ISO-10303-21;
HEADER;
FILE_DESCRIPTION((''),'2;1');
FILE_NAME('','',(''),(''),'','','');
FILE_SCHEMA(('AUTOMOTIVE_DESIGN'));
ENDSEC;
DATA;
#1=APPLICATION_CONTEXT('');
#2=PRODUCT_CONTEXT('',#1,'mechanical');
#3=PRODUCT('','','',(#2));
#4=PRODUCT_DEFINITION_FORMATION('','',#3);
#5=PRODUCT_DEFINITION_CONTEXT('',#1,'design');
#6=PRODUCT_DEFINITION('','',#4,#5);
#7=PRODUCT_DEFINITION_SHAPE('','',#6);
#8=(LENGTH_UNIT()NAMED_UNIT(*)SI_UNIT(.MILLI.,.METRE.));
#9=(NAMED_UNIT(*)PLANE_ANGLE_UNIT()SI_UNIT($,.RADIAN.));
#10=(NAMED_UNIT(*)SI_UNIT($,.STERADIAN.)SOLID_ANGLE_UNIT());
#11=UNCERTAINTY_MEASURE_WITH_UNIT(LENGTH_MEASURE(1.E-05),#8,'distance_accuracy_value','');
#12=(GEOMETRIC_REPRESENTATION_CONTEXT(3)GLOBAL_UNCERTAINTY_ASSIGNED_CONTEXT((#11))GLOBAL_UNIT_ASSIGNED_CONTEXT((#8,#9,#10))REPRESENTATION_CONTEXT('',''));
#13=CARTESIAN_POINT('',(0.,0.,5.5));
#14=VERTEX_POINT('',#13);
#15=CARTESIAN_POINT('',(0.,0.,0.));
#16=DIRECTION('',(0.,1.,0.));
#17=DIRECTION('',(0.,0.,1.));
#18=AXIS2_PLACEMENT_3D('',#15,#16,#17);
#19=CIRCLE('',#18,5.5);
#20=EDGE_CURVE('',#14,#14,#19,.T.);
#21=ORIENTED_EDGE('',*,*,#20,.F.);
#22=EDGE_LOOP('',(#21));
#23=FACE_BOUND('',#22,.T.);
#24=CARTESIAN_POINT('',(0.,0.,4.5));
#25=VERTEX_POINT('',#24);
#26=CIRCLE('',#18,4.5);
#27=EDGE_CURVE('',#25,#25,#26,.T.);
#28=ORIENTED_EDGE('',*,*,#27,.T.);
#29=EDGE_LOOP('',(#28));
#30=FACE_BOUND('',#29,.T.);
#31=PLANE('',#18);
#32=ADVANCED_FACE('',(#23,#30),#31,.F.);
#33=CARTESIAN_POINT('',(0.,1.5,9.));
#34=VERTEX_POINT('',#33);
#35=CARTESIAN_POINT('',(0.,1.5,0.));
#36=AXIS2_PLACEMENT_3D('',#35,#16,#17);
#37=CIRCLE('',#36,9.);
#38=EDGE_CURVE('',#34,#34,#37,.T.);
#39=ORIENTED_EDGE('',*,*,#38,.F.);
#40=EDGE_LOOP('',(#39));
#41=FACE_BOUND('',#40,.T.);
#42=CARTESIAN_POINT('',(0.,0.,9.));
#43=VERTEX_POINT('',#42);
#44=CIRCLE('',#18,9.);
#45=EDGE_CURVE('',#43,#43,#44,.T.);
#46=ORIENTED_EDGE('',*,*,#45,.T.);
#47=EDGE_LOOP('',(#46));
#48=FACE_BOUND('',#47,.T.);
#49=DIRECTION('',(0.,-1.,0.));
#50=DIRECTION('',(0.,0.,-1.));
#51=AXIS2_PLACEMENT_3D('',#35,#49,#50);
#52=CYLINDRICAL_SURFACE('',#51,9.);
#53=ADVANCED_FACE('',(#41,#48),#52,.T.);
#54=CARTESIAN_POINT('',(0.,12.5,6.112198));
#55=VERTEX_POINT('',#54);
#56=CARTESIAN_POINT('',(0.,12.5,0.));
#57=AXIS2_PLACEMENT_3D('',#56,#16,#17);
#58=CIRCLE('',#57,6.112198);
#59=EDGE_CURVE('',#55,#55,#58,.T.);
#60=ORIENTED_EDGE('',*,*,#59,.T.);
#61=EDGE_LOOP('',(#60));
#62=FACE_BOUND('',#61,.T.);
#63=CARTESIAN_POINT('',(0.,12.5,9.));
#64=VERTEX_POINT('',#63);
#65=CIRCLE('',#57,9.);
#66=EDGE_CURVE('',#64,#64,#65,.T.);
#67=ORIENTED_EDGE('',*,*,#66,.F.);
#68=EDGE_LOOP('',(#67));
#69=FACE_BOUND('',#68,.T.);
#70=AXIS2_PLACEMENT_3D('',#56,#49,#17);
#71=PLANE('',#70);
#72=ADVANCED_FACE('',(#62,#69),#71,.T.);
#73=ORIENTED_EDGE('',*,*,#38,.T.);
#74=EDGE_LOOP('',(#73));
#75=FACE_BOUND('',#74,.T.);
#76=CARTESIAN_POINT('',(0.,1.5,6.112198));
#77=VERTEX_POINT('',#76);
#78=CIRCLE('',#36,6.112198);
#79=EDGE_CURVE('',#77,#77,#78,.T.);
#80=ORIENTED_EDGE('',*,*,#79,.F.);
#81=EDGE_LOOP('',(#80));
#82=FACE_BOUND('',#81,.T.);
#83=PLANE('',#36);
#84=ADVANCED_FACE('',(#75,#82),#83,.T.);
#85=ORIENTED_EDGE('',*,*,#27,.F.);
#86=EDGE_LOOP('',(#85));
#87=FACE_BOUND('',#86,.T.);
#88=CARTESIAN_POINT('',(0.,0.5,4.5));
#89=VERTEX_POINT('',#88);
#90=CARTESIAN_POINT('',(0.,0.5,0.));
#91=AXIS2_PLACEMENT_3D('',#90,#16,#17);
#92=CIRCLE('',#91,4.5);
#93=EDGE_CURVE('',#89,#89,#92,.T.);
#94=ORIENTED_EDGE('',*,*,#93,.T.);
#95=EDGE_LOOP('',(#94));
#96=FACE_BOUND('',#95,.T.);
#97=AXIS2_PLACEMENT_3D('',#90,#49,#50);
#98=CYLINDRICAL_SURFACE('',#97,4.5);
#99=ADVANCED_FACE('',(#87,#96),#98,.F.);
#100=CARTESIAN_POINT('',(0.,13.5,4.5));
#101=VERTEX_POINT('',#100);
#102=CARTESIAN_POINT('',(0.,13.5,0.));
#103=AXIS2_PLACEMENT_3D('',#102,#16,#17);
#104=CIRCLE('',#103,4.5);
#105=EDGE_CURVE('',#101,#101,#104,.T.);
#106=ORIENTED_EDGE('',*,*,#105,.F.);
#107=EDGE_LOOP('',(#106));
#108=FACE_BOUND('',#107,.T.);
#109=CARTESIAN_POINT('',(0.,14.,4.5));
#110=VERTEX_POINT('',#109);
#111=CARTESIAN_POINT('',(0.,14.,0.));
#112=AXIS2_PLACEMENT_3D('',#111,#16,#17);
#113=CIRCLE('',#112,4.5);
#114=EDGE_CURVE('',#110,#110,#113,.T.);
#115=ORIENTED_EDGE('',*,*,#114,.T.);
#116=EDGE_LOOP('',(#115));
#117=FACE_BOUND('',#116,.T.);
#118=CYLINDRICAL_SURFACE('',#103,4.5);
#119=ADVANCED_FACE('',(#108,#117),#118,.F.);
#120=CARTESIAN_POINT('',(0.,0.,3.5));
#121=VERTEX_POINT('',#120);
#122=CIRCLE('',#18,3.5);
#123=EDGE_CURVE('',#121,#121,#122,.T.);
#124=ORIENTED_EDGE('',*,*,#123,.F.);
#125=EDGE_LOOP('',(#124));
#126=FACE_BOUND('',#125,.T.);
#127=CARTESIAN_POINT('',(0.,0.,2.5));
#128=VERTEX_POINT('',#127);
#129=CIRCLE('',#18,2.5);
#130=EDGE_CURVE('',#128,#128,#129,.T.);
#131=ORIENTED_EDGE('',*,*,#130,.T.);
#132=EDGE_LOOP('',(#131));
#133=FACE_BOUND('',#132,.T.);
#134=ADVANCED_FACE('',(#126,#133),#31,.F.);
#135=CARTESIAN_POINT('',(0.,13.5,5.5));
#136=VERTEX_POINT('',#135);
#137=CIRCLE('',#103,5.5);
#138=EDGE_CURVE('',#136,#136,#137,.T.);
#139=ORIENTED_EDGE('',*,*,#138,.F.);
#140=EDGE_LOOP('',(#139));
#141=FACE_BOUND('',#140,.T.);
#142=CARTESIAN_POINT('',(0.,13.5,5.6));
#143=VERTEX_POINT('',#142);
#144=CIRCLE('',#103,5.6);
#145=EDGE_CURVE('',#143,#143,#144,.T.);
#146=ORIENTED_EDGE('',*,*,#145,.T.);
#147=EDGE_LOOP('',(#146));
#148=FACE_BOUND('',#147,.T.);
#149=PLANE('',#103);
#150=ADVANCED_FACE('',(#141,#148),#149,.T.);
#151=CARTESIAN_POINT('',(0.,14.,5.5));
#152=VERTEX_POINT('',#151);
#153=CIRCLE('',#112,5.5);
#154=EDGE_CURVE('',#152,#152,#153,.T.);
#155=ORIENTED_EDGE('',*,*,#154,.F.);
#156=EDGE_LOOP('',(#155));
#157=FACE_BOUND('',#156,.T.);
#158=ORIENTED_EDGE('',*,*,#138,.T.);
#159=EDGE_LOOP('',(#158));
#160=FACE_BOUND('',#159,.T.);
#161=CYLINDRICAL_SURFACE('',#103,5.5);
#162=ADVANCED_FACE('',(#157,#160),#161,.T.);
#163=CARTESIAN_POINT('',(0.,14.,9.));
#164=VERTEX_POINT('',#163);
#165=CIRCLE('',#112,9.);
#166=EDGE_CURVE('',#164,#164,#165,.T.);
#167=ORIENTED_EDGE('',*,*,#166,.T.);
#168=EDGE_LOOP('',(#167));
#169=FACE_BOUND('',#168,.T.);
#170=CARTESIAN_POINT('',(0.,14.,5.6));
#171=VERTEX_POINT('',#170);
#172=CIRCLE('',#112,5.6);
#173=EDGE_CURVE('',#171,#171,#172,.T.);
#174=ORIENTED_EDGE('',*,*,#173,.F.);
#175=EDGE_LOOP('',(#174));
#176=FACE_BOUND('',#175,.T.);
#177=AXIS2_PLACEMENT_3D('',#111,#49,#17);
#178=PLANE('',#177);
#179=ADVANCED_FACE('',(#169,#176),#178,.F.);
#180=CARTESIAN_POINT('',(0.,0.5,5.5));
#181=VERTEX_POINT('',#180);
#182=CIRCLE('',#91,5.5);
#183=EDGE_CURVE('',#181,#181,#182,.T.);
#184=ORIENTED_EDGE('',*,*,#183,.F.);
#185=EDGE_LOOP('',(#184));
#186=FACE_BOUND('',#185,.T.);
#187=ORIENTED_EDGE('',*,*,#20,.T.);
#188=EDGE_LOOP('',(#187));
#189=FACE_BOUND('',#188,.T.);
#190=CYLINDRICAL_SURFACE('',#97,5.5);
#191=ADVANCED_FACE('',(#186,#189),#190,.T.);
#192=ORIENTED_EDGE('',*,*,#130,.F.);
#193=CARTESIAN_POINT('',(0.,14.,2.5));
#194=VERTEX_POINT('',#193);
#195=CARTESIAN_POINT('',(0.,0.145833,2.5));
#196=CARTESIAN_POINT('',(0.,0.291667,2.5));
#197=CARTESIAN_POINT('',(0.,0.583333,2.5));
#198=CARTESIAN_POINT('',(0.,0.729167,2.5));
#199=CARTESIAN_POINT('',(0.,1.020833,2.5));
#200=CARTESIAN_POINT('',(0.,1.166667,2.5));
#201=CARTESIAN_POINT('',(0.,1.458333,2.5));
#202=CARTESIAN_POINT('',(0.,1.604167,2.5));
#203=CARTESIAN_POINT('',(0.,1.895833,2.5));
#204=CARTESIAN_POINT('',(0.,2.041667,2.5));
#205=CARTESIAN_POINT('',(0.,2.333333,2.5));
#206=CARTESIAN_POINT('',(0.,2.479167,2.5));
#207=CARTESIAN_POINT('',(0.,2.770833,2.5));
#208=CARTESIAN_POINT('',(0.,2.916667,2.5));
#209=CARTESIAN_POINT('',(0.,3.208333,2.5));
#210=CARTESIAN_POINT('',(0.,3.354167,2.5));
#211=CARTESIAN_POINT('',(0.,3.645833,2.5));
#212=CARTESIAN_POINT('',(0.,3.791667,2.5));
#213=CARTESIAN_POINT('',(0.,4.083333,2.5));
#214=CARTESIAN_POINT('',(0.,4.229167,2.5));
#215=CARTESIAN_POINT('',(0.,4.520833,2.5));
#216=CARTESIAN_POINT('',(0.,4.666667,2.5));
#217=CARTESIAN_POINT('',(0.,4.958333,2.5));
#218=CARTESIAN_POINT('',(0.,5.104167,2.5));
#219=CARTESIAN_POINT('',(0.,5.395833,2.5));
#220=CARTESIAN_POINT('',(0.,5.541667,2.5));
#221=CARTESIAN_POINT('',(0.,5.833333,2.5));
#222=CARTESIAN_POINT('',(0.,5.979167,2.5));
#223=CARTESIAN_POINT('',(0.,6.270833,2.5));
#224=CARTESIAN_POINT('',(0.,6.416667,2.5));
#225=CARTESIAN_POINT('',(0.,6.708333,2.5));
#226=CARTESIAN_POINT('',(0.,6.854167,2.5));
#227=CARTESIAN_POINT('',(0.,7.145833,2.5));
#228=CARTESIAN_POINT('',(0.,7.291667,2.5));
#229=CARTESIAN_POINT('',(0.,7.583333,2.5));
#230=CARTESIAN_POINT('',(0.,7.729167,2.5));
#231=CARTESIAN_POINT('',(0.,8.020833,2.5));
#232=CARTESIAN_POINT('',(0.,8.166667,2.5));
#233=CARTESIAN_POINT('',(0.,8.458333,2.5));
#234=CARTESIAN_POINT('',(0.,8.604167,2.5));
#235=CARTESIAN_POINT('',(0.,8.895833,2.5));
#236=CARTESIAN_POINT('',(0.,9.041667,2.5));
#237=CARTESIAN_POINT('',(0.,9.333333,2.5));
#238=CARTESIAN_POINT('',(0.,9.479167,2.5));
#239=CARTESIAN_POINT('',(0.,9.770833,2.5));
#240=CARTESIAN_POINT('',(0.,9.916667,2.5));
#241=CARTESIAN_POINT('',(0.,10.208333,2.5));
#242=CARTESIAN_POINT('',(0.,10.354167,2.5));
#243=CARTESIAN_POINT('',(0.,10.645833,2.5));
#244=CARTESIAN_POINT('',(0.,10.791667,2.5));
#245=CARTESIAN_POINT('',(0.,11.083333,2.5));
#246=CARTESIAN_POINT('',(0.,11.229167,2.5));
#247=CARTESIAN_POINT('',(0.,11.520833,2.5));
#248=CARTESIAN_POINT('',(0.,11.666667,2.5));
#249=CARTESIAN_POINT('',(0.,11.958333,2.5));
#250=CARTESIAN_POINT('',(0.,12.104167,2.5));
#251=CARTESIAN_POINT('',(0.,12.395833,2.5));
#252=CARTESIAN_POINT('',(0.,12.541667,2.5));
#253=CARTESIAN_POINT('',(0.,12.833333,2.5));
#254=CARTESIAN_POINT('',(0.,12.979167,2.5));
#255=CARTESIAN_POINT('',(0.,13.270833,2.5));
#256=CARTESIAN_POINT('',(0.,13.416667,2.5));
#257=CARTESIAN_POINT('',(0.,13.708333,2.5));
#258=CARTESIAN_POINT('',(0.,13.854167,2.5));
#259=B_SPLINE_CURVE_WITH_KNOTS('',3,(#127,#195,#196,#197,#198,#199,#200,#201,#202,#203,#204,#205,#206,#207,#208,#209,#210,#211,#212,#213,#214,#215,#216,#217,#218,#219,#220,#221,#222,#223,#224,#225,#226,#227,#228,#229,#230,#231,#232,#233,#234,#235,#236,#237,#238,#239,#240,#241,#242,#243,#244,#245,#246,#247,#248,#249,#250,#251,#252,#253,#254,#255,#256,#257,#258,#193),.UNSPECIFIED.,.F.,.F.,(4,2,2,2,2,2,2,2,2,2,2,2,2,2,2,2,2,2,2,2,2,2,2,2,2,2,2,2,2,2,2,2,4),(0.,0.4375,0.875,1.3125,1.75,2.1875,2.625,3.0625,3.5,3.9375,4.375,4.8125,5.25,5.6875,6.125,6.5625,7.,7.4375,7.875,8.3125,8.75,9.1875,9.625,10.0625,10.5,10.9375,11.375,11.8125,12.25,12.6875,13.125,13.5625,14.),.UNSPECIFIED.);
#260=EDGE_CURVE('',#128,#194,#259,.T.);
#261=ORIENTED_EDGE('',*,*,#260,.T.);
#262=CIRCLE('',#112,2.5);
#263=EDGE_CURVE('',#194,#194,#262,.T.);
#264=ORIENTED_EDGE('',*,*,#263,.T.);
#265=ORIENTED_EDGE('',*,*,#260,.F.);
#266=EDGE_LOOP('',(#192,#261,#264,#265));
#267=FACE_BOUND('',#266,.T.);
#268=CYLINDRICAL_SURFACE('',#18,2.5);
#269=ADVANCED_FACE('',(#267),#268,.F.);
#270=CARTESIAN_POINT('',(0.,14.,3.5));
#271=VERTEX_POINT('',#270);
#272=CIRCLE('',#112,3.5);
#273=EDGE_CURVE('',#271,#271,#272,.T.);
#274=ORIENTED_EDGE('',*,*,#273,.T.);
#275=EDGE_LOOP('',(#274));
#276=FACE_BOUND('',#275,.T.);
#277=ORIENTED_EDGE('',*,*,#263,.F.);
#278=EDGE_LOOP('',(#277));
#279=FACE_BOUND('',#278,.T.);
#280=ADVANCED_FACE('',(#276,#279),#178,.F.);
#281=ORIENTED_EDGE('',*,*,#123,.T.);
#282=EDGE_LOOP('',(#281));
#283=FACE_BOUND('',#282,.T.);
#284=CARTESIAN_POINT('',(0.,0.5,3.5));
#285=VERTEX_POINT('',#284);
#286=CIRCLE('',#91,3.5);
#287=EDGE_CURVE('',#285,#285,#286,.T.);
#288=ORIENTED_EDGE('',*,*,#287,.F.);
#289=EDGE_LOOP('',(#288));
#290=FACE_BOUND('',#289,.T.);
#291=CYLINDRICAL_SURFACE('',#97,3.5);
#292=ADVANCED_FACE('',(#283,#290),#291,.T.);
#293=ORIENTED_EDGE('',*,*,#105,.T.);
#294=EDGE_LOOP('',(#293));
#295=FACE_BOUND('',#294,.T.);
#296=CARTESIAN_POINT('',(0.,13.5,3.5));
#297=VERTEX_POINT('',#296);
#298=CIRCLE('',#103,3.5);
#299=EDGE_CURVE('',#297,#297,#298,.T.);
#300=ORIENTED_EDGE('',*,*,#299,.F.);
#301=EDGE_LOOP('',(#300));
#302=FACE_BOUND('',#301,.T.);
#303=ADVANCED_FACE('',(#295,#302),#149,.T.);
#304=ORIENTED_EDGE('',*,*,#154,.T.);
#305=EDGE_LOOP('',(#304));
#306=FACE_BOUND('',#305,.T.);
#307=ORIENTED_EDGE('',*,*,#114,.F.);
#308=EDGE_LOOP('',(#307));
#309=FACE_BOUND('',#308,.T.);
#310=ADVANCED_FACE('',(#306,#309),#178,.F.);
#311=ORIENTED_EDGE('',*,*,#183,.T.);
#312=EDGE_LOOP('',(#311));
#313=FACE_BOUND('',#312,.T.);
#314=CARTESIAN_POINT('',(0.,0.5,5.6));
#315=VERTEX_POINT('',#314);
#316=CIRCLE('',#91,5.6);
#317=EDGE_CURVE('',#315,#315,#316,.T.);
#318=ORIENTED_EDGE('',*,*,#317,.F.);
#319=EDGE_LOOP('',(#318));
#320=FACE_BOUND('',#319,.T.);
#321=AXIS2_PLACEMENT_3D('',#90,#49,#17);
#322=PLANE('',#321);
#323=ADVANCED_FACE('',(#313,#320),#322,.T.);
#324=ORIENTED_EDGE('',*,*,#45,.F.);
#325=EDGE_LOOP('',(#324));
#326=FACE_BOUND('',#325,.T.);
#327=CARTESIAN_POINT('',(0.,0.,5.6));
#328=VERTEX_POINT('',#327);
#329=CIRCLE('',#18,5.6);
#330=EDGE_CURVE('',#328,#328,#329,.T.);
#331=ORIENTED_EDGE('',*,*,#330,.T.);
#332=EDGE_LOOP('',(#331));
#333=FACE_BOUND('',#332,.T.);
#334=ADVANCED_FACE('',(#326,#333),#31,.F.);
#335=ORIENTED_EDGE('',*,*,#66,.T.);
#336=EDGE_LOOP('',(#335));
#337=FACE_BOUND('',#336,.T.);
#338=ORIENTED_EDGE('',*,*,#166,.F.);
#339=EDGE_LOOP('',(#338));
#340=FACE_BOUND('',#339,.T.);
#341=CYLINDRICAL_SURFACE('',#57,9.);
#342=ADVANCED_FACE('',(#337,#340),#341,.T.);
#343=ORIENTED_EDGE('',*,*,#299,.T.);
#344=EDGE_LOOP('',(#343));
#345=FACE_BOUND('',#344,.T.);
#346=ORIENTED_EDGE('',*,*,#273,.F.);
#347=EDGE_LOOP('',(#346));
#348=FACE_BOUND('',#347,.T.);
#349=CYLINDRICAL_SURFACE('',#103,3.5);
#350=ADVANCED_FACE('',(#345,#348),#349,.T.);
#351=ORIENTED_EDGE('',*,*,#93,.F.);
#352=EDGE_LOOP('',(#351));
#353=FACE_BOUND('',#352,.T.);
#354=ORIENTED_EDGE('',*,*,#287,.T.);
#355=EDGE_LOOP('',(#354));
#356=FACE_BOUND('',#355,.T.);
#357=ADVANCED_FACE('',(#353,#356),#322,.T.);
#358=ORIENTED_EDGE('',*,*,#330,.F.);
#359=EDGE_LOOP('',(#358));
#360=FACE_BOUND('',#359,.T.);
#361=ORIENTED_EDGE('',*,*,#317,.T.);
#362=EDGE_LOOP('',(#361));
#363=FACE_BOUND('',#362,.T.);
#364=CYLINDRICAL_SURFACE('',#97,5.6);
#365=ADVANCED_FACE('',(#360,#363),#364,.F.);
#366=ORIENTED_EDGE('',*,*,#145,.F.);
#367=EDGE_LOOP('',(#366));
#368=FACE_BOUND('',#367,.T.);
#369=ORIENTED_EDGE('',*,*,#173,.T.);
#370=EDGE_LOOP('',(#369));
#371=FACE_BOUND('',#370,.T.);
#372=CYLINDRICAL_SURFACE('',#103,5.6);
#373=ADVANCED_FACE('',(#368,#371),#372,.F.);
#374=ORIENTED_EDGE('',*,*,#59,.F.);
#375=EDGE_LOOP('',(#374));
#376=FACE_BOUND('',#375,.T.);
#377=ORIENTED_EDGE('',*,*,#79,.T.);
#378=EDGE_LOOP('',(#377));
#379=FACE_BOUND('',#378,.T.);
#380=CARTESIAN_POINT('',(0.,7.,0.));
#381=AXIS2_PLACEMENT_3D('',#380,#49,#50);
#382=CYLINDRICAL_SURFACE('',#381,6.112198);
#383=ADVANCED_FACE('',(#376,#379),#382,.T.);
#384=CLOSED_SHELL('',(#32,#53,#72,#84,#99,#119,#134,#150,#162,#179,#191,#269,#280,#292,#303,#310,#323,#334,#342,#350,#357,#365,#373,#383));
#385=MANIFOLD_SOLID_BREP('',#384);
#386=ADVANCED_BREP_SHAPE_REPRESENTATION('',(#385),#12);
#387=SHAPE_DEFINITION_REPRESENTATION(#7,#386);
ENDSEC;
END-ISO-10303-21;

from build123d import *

# Parameters (mm, degrees)
BOSS_EXTRUDE1_OUTLINE_R = 9
BOSS_EXTRUDE1_DEPTH     = 1.5
SKETCH2_R               = 6.1121977
BOSS_EXTRUDE2_DEPTH     = 5.5
SKETCH3_R               = 2.5
CUT_EXTRUDE1_DEPTH      = 19.920887928
SKETCH4_R               = 5.6
SKETCH4_R_2             = 5.5
SKETCH4_R_3             = 4.5
SKETCH4_R_4             = 3.5
CUT_EXTRUDE2_DEPTH      = 0.5


# Read off the part's stored shape, not the designer's step: Boss-Extrude1
with BuildPart() as part:
    # Boss-Extrude1 outline → Boss-Extrude1 (new body)
    with BuildSketch(Plane(origin=(0, 0, 0), x_dir=(1, 0, 0), z_dir=(0, 1, 0))):
        Circle(BOSS_EXTRUDE1_OUTLINE_R)
    boss_extrude1 = extrude(amount=BOSS_EXTRUDE1_DEPTH)

    # Sketch2 → Boss-Extrude2 (add)
    with BuildSketch(Plane(origin=(0, 1.5, 0), x_dir=(1, 0, 0), z_dir=(0, 1, 0))):
        with Locations(Location((0, 0, 0), (0, 0, 270))):
            Circle(SKETCH2_R)
    boss_extrude2 = extrude(amount=BOSS_EXTRUDE2_DEPTH)

    # Mirror1: Boss-Extrude2 across plane
    add(boss_extrude2.mirror(Plane.ZX.offset(7)))

    # Mirror2: Boss-Extrude1 across plane
    add(boss_extrude1.mirror(Plane.ZX.offset(7)))

    # Sketch3 → Cut-Extrude1 (cut, through all)
    with BuildSketch(Plane(origin=(0, 14, 0), x_dir=(1, 0, 0), z_dir=(0, 1, 0))):
        with Locations(Location((0, 0, 0), (0, 0, 270))):
            Circle(SKETCH3_R)
    extrude(amount=-CUT_EXTRUDE1_DEPTH, mode=Mode.SUBTRACT)

    # Sketch4 → Cut-Extrude2 (cut)
    # profile 1 of 2: a face of its own
    with BuildSketch(Plane(origin=(0, 14, 0), x_dir=(1, 0, 0), z_dir=(0, 1, 0))):
        with Locations(Location((0, 0, 0), (0, 0, 270))):
            Circle(SKETCH4_R)
        with Locations(Location((0, 0, 0), (0, 0, 270))):
            Circle(SKETCH4_R_2, mode=Mode.SUBTRACT)
    # profile 2 of 2: a face of its own
    with BuildSketch(Plane(origin=(0, 14, 0), x_dir=(1, 0, 0), z_dir=(0, 1, 0))):
        with Locations(Location((0, 0, 0), (0, 0, 270))):
            Circle(SKETCH4_R_3)
        with Locations(Location((0, 0, 0), (0, 0, 270))):
            Circle(SKETCH4_R_4, mode=Mode.SUBTRACT)
    cut_extrude2 = extrude(amount=-CUT_EXTRUDE2_DEPTH, mode=Mode.SUBTRACT)

    # Mirror3: Cut-Extrude2 across plane
    add(cut_extrude2.mirror(Plane.ZX.offset(7)), mode=Mode.SUBTRACT)


solid = part.part
